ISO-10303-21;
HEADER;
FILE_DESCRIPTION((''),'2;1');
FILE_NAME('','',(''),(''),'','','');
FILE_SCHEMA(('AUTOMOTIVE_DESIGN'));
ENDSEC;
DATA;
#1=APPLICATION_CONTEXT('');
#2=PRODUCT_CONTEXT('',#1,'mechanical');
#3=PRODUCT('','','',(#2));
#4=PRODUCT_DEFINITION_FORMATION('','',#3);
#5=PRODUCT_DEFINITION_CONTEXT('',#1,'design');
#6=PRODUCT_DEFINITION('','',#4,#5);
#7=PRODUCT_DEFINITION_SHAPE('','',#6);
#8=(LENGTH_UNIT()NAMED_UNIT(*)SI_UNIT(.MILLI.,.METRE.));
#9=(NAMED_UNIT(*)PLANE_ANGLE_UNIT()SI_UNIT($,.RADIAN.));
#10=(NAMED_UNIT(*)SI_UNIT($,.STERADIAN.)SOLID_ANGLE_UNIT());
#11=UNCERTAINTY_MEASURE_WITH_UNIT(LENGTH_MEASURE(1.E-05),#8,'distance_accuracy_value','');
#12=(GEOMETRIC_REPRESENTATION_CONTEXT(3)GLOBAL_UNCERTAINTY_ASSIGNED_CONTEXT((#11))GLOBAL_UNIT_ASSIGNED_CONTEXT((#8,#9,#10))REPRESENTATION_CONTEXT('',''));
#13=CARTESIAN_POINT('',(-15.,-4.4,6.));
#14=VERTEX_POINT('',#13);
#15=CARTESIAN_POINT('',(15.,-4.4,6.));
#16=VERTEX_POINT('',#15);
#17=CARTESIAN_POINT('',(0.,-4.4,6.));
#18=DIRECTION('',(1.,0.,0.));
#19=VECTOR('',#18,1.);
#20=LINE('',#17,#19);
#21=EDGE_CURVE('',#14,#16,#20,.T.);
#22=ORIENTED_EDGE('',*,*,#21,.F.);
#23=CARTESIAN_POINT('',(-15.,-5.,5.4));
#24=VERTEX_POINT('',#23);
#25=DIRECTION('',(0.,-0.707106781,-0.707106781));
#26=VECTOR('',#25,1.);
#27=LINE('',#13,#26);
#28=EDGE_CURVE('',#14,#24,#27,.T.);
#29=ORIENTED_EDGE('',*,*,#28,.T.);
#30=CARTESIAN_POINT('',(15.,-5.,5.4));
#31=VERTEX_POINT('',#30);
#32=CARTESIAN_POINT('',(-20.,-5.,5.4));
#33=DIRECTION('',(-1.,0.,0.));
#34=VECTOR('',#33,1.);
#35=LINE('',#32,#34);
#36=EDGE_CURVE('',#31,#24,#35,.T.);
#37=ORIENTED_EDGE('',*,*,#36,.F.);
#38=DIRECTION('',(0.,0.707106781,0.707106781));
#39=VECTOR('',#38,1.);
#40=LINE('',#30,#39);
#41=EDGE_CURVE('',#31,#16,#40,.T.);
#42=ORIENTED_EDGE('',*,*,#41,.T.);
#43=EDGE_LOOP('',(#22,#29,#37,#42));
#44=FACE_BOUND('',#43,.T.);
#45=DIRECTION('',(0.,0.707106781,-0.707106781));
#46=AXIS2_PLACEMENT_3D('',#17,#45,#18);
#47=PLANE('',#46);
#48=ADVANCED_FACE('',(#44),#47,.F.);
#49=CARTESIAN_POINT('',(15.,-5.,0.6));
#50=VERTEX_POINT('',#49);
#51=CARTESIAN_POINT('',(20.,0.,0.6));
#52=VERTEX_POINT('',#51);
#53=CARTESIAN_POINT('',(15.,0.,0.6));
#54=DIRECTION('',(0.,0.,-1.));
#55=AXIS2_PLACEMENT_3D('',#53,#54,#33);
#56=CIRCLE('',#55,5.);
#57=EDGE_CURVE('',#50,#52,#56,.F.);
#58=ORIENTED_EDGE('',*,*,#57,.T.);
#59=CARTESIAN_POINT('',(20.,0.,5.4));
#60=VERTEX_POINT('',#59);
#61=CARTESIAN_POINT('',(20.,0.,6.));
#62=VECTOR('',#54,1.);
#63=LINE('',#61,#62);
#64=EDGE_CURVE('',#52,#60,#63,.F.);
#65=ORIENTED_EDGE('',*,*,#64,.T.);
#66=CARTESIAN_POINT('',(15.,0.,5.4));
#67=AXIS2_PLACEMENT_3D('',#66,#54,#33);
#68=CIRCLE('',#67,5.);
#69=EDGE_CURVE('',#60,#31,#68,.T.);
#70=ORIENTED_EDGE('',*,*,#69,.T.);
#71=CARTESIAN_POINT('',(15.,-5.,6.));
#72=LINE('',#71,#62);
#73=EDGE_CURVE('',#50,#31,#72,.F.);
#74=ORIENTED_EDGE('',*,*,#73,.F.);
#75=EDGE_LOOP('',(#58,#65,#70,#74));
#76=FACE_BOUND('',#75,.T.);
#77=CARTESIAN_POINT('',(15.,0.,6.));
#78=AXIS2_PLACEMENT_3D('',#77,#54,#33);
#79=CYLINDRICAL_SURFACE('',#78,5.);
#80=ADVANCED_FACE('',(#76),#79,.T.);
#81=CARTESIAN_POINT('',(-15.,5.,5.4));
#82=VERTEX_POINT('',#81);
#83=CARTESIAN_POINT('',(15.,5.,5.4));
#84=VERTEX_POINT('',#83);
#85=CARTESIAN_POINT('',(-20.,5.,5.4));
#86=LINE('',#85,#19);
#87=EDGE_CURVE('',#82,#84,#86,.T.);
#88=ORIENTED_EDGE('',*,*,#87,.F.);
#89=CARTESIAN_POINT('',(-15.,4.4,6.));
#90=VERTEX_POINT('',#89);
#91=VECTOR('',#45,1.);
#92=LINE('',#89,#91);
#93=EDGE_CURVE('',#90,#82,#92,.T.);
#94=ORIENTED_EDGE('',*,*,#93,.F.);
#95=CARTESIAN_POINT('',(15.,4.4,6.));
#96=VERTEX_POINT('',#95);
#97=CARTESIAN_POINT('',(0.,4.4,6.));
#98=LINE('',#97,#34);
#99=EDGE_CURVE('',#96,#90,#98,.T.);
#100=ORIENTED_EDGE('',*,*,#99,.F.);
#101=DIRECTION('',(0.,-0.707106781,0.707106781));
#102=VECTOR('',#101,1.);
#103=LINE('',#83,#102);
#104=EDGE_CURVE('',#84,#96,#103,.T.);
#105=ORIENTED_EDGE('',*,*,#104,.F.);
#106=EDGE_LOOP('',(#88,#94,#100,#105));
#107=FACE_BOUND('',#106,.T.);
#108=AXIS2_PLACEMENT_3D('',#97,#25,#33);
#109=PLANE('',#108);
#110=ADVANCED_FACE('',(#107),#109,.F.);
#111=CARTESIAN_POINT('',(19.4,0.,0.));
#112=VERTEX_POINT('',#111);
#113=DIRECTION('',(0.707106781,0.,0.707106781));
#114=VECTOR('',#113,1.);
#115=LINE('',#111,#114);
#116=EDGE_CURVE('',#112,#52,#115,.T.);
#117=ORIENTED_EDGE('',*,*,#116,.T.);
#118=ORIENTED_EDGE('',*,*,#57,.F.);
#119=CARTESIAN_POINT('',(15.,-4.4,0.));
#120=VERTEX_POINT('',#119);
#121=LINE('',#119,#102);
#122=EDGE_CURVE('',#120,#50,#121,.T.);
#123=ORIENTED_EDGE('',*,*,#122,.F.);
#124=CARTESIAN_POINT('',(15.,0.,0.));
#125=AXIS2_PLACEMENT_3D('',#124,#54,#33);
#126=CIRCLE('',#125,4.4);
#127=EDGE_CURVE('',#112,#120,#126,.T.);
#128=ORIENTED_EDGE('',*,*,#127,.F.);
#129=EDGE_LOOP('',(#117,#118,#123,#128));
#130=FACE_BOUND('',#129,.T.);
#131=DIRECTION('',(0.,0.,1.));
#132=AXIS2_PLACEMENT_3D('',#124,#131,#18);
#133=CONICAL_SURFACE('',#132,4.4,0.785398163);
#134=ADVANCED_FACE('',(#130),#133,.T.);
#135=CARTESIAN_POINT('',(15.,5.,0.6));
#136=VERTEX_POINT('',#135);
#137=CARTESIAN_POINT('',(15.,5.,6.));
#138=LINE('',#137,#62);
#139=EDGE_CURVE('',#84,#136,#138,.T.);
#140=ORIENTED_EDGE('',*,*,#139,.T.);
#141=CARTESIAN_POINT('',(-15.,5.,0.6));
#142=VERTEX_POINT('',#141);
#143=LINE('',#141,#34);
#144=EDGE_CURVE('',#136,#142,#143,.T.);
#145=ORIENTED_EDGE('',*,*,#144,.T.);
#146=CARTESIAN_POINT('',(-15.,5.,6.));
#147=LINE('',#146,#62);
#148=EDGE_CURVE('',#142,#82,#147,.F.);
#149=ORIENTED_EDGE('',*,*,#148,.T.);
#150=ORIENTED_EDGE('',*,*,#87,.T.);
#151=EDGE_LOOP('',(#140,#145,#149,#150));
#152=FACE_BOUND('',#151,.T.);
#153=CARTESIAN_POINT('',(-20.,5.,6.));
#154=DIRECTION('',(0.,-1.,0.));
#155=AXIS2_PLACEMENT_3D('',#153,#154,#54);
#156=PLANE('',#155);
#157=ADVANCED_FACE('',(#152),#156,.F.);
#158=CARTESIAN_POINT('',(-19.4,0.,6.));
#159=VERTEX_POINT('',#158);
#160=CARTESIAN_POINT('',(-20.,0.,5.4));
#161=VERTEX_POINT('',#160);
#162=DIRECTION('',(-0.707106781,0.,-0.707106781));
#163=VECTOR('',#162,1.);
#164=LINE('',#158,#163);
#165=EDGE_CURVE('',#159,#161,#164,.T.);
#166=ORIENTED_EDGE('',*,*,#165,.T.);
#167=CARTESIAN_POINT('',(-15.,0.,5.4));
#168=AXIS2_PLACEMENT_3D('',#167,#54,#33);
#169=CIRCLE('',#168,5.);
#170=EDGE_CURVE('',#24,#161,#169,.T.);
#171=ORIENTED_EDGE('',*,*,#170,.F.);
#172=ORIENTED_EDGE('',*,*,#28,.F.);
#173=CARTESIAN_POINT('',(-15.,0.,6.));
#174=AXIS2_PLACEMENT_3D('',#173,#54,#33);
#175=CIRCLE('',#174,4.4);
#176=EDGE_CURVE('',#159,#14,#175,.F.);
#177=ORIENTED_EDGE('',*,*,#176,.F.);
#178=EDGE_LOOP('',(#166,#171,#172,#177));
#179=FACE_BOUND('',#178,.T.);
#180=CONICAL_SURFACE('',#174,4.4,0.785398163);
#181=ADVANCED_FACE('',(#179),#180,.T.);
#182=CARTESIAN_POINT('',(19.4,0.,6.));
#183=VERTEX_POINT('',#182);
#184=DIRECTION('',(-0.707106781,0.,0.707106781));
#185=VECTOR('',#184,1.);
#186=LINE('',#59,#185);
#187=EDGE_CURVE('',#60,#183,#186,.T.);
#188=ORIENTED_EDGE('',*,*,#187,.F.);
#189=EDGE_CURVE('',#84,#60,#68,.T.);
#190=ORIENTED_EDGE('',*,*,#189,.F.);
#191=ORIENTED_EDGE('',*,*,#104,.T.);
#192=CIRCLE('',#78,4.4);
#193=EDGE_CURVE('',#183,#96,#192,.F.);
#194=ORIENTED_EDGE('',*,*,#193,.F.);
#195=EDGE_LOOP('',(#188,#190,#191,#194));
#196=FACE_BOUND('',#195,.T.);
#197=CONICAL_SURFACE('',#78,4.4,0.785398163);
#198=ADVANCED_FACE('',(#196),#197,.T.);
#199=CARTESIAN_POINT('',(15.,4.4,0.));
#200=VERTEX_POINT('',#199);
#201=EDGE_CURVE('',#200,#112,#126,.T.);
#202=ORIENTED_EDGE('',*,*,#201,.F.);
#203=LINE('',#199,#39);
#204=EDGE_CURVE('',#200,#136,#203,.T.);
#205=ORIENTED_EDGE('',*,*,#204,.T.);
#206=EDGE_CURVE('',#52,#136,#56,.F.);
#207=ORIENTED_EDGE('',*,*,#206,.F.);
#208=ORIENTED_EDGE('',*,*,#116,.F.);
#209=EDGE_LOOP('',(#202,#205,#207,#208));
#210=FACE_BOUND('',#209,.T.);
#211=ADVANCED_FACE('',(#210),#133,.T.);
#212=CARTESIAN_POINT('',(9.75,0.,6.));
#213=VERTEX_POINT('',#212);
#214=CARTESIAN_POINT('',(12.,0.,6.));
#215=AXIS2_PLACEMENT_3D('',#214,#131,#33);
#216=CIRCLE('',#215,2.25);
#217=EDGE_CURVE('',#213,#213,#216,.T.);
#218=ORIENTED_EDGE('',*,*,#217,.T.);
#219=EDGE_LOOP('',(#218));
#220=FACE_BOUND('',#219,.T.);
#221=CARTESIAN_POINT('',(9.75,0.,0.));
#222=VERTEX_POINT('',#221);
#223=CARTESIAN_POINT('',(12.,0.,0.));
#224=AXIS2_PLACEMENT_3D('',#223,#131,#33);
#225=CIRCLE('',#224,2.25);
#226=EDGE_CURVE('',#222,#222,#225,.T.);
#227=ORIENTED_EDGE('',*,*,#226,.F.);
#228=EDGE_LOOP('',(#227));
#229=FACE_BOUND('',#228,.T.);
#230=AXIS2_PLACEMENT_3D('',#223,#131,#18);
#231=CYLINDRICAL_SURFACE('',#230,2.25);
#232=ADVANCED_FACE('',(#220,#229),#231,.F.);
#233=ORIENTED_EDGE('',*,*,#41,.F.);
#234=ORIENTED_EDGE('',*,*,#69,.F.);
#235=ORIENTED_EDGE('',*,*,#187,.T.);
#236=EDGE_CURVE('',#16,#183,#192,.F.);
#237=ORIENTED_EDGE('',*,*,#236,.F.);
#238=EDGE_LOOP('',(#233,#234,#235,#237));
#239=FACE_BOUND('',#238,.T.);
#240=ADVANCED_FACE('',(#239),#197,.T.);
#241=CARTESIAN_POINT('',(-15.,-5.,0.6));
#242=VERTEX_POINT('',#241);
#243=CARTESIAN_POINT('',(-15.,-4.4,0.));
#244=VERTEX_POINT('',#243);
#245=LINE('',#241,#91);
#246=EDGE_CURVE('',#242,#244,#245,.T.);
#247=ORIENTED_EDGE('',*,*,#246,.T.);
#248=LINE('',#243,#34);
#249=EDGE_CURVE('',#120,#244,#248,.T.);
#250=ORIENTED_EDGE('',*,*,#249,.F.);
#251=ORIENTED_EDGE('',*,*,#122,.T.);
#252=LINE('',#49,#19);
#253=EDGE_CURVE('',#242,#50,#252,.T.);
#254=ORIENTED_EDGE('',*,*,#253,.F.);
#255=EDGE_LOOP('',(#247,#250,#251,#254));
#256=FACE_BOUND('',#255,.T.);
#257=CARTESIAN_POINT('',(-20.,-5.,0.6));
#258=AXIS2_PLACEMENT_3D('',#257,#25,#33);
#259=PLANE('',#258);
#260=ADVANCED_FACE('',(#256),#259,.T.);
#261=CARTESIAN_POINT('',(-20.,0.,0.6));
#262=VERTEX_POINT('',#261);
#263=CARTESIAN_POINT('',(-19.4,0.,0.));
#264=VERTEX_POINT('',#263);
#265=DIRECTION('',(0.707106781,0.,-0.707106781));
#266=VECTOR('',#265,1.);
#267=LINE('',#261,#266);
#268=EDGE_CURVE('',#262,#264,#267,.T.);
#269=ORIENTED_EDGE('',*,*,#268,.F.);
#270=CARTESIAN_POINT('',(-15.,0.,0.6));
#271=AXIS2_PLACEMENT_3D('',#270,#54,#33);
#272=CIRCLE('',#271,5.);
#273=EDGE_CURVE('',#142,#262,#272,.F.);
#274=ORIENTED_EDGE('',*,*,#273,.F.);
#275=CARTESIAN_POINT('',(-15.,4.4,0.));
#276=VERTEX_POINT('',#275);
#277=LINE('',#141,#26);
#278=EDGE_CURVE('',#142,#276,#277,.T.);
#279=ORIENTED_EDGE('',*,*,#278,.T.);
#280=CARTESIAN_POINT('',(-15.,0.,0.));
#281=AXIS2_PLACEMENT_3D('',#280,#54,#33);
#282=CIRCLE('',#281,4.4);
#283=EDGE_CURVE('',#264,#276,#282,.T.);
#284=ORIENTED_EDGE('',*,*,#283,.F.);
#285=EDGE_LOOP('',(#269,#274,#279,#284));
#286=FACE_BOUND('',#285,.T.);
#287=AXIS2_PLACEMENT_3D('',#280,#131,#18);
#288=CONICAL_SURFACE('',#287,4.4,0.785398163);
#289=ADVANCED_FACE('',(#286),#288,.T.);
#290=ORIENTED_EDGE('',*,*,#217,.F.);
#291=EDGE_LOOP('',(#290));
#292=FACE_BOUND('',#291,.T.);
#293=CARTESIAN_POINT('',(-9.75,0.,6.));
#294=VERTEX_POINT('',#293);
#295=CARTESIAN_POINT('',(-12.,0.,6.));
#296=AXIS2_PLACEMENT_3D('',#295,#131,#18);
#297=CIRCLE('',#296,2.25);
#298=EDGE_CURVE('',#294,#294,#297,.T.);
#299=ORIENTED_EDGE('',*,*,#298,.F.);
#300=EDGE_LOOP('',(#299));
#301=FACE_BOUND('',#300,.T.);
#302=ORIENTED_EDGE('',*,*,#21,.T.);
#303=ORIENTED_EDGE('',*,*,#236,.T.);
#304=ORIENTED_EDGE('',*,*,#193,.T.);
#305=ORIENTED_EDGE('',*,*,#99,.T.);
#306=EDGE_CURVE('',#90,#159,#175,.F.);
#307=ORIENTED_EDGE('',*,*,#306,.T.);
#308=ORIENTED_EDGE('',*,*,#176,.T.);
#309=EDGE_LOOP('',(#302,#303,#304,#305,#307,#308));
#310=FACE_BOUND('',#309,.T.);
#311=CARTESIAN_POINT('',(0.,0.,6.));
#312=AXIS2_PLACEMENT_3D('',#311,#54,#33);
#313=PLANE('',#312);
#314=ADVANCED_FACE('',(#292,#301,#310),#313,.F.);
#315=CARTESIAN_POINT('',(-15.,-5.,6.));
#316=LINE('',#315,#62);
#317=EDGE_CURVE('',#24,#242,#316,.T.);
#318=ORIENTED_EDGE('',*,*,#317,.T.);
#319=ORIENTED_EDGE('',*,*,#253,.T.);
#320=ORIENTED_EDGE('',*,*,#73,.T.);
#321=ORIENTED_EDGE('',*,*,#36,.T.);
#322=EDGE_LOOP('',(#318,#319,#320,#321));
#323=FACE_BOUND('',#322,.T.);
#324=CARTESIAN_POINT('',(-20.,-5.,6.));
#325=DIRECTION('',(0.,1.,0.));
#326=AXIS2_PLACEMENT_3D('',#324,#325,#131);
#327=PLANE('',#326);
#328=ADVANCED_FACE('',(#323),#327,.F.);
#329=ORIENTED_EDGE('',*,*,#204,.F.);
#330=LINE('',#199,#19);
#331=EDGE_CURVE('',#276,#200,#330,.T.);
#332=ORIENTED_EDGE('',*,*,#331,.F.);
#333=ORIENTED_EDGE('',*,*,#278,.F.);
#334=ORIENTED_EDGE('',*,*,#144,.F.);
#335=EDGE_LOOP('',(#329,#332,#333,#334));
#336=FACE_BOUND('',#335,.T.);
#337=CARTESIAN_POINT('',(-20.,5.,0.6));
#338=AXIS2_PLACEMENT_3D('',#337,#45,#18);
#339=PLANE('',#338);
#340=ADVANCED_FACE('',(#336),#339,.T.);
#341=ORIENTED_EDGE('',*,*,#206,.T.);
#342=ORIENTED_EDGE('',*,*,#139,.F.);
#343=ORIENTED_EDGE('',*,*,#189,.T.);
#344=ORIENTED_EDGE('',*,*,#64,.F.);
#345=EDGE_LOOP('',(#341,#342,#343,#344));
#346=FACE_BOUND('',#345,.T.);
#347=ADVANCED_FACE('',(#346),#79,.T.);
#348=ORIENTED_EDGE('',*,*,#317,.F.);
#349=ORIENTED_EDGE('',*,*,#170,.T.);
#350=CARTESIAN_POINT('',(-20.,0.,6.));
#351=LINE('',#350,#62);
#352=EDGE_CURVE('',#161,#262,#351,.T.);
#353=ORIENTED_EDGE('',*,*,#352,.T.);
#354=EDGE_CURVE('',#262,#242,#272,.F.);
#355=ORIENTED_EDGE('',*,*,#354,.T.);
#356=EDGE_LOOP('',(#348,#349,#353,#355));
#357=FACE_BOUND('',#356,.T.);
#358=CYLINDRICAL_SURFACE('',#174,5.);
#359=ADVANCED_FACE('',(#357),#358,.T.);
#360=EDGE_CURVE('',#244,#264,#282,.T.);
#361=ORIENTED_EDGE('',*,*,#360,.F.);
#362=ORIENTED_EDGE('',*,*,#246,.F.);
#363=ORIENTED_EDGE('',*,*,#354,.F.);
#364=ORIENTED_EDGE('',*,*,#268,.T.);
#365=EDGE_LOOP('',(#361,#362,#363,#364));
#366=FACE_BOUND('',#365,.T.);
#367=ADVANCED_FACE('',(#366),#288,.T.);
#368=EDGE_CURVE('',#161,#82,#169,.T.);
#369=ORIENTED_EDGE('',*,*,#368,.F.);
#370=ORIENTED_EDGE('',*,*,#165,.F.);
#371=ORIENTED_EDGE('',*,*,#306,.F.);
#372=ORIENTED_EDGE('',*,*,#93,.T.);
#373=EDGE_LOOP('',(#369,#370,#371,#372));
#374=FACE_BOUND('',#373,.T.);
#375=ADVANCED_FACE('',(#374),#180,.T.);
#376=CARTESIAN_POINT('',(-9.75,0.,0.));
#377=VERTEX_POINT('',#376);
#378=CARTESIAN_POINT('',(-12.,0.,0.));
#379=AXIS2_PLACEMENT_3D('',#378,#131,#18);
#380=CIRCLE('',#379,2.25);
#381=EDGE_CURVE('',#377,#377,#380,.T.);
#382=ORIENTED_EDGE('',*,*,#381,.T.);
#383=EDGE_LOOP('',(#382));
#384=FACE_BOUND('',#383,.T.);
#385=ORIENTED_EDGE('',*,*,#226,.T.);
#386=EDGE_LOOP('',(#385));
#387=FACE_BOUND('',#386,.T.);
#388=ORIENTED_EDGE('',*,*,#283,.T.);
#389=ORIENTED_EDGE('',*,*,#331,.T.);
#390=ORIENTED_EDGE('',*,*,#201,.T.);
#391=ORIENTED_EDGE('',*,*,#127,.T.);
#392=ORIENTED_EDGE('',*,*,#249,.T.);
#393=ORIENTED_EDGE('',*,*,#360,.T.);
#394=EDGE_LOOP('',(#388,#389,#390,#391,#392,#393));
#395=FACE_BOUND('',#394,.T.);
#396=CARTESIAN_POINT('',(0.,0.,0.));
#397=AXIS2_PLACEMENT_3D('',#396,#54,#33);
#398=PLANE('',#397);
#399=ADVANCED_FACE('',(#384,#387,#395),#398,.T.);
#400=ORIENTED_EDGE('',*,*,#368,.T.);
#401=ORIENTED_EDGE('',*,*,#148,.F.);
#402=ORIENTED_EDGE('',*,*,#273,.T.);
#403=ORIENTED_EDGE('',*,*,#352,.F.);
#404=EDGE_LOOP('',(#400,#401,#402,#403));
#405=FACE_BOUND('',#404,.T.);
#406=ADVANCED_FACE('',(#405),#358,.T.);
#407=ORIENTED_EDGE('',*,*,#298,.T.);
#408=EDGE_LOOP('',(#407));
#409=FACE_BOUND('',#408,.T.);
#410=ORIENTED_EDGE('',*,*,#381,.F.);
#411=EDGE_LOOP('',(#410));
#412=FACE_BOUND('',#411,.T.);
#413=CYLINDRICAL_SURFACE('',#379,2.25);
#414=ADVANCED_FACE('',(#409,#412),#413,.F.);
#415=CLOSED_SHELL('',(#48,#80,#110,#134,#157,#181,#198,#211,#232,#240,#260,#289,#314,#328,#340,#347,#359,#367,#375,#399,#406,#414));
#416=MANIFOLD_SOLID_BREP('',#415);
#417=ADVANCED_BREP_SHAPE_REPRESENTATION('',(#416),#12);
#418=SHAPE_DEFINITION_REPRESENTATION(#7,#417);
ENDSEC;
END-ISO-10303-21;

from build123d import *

# Parameters (mm, degrees)
SKETCH1_W           = 40
SKETCH1_H           = 10
BOSS_EXTRUDE1_DEPTH = 6
SKETCH2_R           = 2.25
CUT_EXTRUDE1_DEPTH  = 6
FILLET1_R           = 5
CHAMFER1_SIZE       = 0.6


with BuildPart() as part:
    # Sketch1 → Boss-Extrude1 (new body)
    with BuildSketch(Plane.XY):
        Rectangle(SKETCH1_W, SKETCH1_H)
    extrude(amount=BOSS_EXTRUDE1_DEPTH)

    # Sketch2 → Cut-Extrude1 (cut)
    with BuildSketch(Plane.XY.offset(6)):
        with Locations((-12, 0)):
            Circle(SKETCH2_R)
        with Locations(Location((12, 0, 0), (0, 0, 180))):
            Circle(SKETCH2_R)
    extrude(amount=-CUT_EXTRUDE1_DEPTH, mode=Mode.SUBTRACT)

    # Fillet1
    fillet1_edges = [part.edges().sort_by_distance(p)[0] for p in [
        (20, -5, 3),
        (20, 5, 3),
        (-20, -5, 3),
        (-20, 5, 3),
    ]]
    fillet(fillet1_edges, radius=FILLET1_R - 0.0001)  # a hair under: the kernel refuses the full size

    # Chamfer1
    chamfer1_edges = [part.edges().sort_by_distance(p)[0] for p in [
        (0, -5, 0),
        (0, 5, 0),
        (-18.535563195, 3.535563195, 0),
        (-18.535563195, -3.535563195, 0),
        (18.535563195, 3.535563195, 0),
        (18.535563195, -3.535563195, 0),
        (0, -5, 6),
        (0, 5, 6),
        (-18.535563195, 3.535563195, 6),
        (-18.535563195, -3.535563195, 6),
        (18.535563195, 3.535563195, 6),
        (18.535563195, -3.535563195, 6),
    ]]
    chamfer(chamfer1_edges, length=CHAMFER1_SIZE)


solid = part.part
